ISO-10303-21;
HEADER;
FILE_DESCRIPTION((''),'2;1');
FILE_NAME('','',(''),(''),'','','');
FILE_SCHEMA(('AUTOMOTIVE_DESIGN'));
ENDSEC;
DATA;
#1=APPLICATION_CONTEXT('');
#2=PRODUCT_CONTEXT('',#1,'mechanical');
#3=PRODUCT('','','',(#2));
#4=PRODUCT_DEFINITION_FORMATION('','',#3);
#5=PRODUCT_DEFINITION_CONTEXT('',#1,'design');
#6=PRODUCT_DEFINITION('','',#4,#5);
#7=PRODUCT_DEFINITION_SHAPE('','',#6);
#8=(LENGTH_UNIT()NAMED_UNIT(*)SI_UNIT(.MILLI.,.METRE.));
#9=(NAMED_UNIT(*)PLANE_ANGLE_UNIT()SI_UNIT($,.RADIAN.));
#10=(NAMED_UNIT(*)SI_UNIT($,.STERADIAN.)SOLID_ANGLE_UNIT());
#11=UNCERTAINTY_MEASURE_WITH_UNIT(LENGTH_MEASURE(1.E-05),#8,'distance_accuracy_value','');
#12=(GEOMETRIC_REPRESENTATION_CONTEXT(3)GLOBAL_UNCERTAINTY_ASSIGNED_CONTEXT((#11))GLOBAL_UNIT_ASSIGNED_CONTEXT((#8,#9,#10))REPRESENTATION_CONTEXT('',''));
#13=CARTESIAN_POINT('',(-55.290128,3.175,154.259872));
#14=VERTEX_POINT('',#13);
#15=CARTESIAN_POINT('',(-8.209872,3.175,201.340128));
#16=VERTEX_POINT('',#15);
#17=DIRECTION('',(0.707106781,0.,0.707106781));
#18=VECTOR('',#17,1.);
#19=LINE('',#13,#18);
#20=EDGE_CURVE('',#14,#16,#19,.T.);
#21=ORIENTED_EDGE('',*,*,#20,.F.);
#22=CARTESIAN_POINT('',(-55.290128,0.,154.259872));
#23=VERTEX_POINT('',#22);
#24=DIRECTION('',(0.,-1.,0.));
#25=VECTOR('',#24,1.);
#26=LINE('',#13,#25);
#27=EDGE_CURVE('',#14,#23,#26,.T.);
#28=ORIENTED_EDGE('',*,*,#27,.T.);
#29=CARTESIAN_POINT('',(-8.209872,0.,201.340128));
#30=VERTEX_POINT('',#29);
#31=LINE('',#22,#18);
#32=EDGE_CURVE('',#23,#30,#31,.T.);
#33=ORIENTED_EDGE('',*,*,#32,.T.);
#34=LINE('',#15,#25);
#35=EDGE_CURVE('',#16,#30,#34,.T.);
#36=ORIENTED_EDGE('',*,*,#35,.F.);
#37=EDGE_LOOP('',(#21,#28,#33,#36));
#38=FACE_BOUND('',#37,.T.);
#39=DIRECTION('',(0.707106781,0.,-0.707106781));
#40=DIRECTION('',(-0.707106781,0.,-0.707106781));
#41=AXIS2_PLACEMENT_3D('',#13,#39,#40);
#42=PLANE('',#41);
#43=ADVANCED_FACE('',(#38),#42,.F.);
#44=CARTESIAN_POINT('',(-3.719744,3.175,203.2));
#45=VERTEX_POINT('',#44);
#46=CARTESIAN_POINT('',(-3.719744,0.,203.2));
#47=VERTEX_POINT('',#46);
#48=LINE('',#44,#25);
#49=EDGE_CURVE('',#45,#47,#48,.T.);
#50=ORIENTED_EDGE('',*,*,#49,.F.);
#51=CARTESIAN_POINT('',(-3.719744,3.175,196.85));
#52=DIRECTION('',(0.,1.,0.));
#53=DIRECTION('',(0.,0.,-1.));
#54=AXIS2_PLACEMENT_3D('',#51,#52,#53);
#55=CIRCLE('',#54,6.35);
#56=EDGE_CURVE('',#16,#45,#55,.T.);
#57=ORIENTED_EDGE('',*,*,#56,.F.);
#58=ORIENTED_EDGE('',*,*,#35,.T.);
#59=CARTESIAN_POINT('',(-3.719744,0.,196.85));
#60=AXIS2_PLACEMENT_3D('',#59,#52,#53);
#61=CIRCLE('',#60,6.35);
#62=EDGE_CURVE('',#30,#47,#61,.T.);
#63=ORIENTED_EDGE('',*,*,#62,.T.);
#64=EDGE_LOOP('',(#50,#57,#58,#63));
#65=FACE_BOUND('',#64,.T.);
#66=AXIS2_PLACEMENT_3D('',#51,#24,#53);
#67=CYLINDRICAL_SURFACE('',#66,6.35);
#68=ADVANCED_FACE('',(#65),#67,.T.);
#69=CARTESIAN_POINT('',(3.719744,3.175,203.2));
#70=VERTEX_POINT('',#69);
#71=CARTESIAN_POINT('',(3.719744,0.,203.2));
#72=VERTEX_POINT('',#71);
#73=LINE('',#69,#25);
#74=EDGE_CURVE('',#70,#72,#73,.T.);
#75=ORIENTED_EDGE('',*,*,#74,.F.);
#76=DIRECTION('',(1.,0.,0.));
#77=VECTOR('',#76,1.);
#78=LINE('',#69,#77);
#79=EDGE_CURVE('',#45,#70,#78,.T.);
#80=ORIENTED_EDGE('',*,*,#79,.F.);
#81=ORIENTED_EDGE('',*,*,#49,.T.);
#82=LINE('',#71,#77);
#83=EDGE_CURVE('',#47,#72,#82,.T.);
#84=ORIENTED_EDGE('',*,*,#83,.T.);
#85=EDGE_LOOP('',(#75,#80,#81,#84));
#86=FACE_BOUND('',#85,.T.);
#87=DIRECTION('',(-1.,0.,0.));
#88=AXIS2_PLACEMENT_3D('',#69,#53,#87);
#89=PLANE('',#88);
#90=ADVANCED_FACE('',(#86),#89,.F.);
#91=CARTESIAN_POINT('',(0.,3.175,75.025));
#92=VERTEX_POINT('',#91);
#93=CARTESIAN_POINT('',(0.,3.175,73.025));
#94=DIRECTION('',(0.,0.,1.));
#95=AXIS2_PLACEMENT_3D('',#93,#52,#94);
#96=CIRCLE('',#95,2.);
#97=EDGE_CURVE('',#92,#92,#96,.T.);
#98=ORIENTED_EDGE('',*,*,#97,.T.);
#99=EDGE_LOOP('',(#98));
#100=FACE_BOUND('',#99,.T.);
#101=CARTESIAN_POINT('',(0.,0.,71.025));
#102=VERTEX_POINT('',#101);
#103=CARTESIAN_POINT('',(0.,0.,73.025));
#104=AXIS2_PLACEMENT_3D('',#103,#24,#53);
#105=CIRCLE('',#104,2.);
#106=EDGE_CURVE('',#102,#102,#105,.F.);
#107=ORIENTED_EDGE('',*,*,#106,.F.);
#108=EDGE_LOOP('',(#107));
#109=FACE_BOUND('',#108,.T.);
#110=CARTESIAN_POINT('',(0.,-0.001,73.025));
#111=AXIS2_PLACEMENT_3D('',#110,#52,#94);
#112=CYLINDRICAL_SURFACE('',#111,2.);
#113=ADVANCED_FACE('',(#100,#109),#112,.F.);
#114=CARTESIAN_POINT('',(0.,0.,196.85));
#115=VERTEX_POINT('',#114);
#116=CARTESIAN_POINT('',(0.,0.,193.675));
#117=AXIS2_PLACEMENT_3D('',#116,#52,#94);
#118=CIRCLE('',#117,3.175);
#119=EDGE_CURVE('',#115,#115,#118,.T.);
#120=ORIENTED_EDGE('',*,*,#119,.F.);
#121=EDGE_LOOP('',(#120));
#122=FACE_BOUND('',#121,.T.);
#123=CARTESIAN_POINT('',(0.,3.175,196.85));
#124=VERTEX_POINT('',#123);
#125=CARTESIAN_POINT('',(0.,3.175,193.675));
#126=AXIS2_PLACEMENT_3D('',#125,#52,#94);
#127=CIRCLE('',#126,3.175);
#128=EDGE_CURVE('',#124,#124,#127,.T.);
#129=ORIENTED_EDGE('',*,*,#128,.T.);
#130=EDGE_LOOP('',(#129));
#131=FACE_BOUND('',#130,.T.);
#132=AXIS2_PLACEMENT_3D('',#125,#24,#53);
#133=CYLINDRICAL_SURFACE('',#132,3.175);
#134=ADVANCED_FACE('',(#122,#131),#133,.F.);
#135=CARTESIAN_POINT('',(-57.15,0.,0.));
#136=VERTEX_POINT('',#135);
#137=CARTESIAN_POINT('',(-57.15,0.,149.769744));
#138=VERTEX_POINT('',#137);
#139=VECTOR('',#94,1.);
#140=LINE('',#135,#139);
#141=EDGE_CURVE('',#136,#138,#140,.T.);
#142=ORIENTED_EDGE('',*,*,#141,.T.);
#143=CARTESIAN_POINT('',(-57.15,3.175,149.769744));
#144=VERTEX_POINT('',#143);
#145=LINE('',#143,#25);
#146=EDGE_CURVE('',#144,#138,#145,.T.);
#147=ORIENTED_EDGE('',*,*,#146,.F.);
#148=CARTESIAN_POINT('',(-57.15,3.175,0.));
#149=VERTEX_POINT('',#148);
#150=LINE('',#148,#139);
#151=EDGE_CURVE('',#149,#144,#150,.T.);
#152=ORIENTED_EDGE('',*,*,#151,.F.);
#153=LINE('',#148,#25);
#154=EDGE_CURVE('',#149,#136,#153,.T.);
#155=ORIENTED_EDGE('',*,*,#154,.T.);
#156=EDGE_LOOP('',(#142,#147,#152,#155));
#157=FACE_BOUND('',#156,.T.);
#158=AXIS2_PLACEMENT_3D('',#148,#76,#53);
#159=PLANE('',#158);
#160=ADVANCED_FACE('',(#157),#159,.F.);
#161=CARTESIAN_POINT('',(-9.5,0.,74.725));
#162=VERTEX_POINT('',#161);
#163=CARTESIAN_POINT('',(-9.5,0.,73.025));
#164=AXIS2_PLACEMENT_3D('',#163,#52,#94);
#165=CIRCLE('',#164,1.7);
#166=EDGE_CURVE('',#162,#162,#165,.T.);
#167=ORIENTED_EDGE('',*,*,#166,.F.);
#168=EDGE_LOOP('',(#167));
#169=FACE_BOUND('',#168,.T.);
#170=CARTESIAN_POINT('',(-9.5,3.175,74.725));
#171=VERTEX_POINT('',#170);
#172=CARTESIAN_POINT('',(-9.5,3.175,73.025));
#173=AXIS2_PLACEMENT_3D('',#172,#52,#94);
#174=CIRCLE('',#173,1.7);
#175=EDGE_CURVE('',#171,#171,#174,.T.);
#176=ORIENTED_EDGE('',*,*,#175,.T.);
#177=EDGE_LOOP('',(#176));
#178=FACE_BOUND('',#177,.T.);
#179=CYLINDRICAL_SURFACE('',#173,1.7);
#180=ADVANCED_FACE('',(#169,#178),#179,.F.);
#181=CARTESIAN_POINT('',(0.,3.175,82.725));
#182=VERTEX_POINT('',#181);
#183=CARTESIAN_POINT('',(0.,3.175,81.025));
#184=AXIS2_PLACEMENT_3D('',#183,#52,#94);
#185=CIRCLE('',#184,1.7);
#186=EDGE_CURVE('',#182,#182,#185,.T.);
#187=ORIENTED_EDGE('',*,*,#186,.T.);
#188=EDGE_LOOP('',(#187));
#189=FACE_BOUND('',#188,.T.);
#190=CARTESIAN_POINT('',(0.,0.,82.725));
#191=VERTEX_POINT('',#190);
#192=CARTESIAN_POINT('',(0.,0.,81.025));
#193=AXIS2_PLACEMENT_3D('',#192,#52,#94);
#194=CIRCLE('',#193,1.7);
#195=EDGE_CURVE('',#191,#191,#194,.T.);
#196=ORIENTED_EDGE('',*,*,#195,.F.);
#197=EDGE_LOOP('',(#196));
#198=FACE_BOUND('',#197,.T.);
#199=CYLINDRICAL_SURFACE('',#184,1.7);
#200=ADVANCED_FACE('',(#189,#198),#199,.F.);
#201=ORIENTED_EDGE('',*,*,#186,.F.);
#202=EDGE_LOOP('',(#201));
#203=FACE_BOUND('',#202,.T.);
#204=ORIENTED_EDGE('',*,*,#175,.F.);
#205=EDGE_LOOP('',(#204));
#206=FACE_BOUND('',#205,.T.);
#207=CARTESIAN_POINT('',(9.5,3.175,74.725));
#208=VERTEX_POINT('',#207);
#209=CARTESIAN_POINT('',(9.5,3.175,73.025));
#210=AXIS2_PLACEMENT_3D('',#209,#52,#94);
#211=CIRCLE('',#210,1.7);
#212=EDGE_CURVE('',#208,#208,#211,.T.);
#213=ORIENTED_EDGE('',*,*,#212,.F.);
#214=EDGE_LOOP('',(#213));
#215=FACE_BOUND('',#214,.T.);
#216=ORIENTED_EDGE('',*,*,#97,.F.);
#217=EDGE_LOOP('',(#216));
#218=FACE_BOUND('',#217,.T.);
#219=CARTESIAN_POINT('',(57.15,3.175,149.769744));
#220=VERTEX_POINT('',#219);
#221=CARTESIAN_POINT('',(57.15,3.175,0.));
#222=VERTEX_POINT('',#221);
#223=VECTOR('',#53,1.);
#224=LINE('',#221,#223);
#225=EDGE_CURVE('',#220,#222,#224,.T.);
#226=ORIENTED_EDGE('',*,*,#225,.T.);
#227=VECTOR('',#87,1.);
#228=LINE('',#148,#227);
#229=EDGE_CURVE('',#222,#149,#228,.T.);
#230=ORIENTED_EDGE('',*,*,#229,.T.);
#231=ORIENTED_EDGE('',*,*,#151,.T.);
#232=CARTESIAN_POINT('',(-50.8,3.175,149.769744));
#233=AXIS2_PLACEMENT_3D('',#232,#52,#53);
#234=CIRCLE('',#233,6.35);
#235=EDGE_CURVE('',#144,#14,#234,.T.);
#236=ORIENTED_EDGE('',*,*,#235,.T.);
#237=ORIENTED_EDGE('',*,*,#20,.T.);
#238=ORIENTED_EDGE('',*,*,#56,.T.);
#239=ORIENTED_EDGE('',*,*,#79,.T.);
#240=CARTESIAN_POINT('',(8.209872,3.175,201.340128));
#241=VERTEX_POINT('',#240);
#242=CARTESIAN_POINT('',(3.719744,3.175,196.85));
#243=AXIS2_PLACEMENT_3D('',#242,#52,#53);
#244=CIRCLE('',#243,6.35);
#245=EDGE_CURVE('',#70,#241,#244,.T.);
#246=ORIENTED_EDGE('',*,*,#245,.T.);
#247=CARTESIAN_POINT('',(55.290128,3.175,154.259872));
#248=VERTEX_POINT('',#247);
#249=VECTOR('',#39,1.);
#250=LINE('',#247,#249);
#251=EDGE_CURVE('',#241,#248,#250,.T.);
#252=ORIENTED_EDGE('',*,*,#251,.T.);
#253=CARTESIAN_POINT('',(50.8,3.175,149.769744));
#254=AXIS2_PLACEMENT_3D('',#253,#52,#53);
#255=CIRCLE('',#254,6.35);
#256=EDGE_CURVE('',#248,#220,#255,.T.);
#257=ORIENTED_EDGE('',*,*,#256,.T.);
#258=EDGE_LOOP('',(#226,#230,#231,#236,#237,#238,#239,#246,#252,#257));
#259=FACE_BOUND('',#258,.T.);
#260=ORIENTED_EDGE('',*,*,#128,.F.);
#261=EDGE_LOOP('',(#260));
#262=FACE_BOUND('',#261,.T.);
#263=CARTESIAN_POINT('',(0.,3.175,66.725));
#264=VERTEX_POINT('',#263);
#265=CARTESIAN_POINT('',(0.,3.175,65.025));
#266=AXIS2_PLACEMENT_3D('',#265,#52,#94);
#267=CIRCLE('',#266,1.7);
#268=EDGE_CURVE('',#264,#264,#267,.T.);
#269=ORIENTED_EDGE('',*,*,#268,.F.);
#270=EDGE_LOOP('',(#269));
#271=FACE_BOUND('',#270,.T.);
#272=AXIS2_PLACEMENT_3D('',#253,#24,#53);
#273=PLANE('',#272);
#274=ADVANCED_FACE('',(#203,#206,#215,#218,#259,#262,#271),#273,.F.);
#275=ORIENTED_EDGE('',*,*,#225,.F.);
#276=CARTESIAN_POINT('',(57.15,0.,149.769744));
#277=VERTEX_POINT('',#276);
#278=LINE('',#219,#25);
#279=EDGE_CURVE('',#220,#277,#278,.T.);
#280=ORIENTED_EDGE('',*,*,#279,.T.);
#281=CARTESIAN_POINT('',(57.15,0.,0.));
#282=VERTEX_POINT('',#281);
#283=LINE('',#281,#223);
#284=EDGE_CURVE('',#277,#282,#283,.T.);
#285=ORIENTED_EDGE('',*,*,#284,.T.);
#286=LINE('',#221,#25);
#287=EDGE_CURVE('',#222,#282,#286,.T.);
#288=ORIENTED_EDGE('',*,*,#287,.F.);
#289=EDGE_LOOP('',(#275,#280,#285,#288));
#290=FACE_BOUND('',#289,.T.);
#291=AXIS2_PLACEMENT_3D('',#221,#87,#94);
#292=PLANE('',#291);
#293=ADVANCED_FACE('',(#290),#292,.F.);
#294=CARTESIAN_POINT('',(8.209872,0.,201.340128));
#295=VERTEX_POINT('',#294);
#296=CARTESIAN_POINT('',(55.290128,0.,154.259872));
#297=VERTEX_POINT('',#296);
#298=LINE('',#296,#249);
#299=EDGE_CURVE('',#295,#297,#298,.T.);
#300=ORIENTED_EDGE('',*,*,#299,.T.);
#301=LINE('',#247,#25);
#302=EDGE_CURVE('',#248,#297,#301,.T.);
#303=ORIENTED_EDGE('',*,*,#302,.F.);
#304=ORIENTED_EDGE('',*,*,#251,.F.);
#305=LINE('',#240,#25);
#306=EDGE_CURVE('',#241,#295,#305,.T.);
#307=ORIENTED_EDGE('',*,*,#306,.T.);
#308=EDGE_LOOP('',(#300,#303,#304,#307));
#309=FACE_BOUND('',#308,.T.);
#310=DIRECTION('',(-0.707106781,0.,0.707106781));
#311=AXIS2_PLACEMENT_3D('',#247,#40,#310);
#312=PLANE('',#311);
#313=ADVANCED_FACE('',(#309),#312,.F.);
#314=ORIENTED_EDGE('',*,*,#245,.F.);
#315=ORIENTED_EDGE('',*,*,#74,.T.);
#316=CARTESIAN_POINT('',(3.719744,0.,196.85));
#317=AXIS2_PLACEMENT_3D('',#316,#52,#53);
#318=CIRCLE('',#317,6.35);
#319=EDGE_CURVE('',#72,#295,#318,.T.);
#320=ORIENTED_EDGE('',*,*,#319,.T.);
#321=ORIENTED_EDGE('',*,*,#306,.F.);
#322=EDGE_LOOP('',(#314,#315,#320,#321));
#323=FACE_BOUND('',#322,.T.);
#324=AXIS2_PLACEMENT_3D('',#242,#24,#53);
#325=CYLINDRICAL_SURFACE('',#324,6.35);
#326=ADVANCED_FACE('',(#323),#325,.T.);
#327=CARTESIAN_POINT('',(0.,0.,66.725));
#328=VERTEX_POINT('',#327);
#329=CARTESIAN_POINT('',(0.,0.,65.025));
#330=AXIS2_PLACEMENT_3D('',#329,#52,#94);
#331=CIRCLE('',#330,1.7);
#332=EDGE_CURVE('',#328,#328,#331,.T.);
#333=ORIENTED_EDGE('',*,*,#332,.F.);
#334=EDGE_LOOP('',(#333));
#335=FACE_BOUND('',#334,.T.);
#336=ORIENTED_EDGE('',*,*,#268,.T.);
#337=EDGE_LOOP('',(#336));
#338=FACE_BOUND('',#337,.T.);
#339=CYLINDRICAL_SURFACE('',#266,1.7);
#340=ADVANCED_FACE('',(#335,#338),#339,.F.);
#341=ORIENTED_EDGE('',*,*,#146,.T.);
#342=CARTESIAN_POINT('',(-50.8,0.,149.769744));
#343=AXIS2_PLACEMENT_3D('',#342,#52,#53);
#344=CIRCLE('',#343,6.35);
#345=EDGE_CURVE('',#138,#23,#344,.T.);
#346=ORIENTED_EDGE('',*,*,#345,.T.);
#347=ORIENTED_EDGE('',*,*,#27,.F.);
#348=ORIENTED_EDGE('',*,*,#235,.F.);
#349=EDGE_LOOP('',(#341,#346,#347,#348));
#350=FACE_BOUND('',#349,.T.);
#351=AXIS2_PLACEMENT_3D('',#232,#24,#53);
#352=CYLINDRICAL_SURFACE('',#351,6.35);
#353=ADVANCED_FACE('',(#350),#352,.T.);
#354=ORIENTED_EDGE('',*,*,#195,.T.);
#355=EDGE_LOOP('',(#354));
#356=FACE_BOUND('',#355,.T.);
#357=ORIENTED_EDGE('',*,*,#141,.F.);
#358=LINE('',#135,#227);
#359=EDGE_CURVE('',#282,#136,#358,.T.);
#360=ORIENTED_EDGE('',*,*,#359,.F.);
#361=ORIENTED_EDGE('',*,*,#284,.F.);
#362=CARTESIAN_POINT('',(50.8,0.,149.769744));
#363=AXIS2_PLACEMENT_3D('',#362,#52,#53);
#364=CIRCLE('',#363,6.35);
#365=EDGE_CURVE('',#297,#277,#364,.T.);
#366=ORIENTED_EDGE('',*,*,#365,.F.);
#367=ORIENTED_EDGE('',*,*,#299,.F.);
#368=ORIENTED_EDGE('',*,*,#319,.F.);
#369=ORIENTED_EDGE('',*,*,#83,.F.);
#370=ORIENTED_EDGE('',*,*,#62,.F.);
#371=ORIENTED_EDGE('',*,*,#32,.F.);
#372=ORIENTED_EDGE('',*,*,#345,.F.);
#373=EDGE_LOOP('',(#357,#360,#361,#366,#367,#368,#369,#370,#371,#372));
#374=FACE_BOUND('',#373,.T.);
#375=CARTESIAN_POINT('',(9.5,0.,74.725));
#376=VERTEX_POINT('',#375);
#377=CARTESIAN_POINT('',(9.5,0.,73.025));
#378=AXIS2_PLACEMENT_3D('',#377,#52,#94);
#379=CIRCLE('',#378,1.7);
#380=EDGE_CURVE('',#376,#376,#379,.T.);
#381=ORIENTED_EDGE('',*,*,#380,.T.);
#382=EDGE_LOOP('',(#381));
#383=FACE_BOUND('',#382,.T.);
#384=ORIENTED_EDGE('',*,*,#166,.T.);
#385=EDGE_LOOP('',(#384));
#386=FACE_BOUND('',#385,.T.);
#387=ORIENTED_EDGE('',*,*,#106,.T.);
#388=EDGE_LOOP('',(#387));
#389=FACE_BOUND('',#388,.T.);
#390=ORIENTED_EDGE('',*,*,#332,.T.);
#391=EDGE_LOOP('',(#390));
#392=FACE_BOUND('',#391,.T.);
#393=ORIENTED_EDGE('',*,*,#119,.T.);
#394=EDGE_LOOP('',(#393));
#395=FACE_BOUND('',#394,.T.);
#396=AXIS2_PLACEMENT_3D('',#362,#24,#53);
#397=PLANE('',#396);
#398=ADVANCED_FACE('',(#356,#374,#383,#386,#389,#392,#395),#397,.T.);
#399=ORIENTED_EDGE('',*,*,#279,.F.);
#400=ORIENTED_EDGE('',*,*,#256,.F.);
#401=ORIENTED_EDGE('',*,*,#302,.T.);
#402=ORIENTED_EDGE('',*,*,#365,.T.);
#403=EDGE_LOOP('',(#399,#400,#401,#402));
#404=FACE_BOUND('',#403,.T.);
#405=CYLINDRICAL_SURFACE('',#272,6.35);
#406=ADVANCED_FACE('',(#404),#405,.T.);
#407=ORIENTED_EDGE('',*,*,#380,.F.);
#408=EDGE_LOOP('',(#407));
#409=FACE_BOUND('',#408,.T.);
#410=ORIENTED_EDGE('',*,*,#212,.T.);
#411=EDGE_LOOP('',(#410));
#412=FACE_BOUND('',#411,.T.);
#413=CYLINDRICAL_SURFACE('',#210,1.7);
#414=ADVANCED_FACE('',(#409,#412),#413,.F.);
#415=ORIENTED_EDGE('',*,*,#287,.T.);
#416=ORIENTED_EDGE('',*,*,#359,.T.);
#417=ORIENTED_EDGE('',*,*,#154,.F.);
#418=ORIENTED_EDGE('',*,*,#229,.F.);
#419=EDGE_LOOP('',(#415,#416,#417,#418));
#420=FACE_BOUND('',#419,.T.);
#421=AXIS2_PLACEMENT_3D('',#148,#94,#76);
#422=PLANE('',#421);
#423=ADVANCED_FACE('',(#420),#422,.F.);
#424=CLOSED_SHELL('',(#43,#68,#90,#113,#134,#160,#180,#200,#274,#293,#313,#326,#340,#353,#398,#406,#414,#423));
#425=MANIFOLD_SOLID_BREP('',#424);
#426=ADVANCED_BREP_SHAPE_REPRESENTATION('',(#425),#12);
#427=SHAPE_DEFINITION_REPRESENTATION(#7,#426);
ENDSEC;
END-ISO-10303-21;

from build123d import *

# Parameters (mm, degrees)
SKETCH1_R               = 3.175
BOSS_EXTRUDE1_DEPTH     = 3.175
CUT_EXTRUDE1_REACH      = 213.108
SKETCH2_R               = 2
ADVANCEDHOLE1_OUTLINE_R = 1.7
ADVANCEDHOLE1_DEPTH     = 3.175


# Read off the part's stored shape, not the designer's step: AdvancedHole1
with BuildPart() as part:
    # Sketch1 → Boss-Extrude1 (new body)
    with BuildSketch(Plane(origin=(0, 0, 0), x_dir=(1, 0, 0), z_dir=(0, 1, 0))):
        with BuildLine():
            Line((-57.15, 0), (57.15, 0))
            Line((57.15, 0), (57.15, -149.769743879))
            ThreePointArc((57.15, -149.769743879), (56.666635031, -152.199783674), (55.290128061, -154.259871939))
            Line((55.290128061, -154.259871939), (8.209871939, -201.340128061))
            ThreePointArc((8.209871939, -201.340128061), (6.149783674, -202.716635031), (3.719743879, -203.2))
            Line((3.719743879, -203.2), (-3.719743879, -203.2))
            ThreePointArc((-3.719743879, -203.2), (-6.149783674, -202.716635031), (-8.209871939, -201.340128061))
            Line((-8.209871939, -201.340128061), (-55.290128061, -154.259871939))
            ThreePointArc((-55.290128061, -154.259871939), (-56.666635031, -152.199783674), (-57.15, -149.769743879))
            Line((-57.15, -149.769743879), (-57.15, 0))
        make_face()
        with Locations(Location((0, -193.675, 0), (0, 0, 270))):
            Circle(SKETCH1_R, mode=Mode.SUBTRACT)
    extrude(amount=BOSS_EXTRUDE1_DEPTH)

    # Sketch2 → Cut-Extrude1 (cut, up to next)
    with BuildSketch(Plane(origin=(0, 3.175, 0), x_dir=(1, 0, 0), z_dir=(0, 1, 0)), mode=Mode.PRIVATE) as cut_extrude1_sk1:
        with Locations(Location((0, -73.025, 0), (0, 0, 270))):
            Circle(SKETCH2_R)
    cut_extrude1_tool1 = extrude(cut_extrude1_sk1.sketch, amount=-CUT_EXTRUDE1_REACH, mode=Mode.PRIVATE) & part.part
    add(cut_extrude1_tool1.solids().sort_by_distance((0, 3.175, 73.025))[0], mode=Mode.SUBTRACT)

    # AdvancedHole1 outline → AdvancedHole1 (cut)
    with BuildSketch(Plane(origin=(0, 0, 0), x_dir=(1, 0, 0), z_dir=(0, 1, 0))):
        with Locations((9.5, -73.025)):
            Circle(ADVANCEDHOLE1_OUTLINE_R)
        with Locations((0, -81.025)):
            Circle(ADVANCEDHOLE1_OUTLINE_R)
        with Locations((-9.5, -73.025)):
            Circle(ADVANCEDHOLE1_OUTLINE_R)
        with Locations((0, -65.025)):
            Circle(ADVANCEDHOLE1_OUTLINE_R)
    extrude(amount=ADVANCEDHOLE1_DEPTH, mode=Mode.SUBTRACT)


solid = part.part
